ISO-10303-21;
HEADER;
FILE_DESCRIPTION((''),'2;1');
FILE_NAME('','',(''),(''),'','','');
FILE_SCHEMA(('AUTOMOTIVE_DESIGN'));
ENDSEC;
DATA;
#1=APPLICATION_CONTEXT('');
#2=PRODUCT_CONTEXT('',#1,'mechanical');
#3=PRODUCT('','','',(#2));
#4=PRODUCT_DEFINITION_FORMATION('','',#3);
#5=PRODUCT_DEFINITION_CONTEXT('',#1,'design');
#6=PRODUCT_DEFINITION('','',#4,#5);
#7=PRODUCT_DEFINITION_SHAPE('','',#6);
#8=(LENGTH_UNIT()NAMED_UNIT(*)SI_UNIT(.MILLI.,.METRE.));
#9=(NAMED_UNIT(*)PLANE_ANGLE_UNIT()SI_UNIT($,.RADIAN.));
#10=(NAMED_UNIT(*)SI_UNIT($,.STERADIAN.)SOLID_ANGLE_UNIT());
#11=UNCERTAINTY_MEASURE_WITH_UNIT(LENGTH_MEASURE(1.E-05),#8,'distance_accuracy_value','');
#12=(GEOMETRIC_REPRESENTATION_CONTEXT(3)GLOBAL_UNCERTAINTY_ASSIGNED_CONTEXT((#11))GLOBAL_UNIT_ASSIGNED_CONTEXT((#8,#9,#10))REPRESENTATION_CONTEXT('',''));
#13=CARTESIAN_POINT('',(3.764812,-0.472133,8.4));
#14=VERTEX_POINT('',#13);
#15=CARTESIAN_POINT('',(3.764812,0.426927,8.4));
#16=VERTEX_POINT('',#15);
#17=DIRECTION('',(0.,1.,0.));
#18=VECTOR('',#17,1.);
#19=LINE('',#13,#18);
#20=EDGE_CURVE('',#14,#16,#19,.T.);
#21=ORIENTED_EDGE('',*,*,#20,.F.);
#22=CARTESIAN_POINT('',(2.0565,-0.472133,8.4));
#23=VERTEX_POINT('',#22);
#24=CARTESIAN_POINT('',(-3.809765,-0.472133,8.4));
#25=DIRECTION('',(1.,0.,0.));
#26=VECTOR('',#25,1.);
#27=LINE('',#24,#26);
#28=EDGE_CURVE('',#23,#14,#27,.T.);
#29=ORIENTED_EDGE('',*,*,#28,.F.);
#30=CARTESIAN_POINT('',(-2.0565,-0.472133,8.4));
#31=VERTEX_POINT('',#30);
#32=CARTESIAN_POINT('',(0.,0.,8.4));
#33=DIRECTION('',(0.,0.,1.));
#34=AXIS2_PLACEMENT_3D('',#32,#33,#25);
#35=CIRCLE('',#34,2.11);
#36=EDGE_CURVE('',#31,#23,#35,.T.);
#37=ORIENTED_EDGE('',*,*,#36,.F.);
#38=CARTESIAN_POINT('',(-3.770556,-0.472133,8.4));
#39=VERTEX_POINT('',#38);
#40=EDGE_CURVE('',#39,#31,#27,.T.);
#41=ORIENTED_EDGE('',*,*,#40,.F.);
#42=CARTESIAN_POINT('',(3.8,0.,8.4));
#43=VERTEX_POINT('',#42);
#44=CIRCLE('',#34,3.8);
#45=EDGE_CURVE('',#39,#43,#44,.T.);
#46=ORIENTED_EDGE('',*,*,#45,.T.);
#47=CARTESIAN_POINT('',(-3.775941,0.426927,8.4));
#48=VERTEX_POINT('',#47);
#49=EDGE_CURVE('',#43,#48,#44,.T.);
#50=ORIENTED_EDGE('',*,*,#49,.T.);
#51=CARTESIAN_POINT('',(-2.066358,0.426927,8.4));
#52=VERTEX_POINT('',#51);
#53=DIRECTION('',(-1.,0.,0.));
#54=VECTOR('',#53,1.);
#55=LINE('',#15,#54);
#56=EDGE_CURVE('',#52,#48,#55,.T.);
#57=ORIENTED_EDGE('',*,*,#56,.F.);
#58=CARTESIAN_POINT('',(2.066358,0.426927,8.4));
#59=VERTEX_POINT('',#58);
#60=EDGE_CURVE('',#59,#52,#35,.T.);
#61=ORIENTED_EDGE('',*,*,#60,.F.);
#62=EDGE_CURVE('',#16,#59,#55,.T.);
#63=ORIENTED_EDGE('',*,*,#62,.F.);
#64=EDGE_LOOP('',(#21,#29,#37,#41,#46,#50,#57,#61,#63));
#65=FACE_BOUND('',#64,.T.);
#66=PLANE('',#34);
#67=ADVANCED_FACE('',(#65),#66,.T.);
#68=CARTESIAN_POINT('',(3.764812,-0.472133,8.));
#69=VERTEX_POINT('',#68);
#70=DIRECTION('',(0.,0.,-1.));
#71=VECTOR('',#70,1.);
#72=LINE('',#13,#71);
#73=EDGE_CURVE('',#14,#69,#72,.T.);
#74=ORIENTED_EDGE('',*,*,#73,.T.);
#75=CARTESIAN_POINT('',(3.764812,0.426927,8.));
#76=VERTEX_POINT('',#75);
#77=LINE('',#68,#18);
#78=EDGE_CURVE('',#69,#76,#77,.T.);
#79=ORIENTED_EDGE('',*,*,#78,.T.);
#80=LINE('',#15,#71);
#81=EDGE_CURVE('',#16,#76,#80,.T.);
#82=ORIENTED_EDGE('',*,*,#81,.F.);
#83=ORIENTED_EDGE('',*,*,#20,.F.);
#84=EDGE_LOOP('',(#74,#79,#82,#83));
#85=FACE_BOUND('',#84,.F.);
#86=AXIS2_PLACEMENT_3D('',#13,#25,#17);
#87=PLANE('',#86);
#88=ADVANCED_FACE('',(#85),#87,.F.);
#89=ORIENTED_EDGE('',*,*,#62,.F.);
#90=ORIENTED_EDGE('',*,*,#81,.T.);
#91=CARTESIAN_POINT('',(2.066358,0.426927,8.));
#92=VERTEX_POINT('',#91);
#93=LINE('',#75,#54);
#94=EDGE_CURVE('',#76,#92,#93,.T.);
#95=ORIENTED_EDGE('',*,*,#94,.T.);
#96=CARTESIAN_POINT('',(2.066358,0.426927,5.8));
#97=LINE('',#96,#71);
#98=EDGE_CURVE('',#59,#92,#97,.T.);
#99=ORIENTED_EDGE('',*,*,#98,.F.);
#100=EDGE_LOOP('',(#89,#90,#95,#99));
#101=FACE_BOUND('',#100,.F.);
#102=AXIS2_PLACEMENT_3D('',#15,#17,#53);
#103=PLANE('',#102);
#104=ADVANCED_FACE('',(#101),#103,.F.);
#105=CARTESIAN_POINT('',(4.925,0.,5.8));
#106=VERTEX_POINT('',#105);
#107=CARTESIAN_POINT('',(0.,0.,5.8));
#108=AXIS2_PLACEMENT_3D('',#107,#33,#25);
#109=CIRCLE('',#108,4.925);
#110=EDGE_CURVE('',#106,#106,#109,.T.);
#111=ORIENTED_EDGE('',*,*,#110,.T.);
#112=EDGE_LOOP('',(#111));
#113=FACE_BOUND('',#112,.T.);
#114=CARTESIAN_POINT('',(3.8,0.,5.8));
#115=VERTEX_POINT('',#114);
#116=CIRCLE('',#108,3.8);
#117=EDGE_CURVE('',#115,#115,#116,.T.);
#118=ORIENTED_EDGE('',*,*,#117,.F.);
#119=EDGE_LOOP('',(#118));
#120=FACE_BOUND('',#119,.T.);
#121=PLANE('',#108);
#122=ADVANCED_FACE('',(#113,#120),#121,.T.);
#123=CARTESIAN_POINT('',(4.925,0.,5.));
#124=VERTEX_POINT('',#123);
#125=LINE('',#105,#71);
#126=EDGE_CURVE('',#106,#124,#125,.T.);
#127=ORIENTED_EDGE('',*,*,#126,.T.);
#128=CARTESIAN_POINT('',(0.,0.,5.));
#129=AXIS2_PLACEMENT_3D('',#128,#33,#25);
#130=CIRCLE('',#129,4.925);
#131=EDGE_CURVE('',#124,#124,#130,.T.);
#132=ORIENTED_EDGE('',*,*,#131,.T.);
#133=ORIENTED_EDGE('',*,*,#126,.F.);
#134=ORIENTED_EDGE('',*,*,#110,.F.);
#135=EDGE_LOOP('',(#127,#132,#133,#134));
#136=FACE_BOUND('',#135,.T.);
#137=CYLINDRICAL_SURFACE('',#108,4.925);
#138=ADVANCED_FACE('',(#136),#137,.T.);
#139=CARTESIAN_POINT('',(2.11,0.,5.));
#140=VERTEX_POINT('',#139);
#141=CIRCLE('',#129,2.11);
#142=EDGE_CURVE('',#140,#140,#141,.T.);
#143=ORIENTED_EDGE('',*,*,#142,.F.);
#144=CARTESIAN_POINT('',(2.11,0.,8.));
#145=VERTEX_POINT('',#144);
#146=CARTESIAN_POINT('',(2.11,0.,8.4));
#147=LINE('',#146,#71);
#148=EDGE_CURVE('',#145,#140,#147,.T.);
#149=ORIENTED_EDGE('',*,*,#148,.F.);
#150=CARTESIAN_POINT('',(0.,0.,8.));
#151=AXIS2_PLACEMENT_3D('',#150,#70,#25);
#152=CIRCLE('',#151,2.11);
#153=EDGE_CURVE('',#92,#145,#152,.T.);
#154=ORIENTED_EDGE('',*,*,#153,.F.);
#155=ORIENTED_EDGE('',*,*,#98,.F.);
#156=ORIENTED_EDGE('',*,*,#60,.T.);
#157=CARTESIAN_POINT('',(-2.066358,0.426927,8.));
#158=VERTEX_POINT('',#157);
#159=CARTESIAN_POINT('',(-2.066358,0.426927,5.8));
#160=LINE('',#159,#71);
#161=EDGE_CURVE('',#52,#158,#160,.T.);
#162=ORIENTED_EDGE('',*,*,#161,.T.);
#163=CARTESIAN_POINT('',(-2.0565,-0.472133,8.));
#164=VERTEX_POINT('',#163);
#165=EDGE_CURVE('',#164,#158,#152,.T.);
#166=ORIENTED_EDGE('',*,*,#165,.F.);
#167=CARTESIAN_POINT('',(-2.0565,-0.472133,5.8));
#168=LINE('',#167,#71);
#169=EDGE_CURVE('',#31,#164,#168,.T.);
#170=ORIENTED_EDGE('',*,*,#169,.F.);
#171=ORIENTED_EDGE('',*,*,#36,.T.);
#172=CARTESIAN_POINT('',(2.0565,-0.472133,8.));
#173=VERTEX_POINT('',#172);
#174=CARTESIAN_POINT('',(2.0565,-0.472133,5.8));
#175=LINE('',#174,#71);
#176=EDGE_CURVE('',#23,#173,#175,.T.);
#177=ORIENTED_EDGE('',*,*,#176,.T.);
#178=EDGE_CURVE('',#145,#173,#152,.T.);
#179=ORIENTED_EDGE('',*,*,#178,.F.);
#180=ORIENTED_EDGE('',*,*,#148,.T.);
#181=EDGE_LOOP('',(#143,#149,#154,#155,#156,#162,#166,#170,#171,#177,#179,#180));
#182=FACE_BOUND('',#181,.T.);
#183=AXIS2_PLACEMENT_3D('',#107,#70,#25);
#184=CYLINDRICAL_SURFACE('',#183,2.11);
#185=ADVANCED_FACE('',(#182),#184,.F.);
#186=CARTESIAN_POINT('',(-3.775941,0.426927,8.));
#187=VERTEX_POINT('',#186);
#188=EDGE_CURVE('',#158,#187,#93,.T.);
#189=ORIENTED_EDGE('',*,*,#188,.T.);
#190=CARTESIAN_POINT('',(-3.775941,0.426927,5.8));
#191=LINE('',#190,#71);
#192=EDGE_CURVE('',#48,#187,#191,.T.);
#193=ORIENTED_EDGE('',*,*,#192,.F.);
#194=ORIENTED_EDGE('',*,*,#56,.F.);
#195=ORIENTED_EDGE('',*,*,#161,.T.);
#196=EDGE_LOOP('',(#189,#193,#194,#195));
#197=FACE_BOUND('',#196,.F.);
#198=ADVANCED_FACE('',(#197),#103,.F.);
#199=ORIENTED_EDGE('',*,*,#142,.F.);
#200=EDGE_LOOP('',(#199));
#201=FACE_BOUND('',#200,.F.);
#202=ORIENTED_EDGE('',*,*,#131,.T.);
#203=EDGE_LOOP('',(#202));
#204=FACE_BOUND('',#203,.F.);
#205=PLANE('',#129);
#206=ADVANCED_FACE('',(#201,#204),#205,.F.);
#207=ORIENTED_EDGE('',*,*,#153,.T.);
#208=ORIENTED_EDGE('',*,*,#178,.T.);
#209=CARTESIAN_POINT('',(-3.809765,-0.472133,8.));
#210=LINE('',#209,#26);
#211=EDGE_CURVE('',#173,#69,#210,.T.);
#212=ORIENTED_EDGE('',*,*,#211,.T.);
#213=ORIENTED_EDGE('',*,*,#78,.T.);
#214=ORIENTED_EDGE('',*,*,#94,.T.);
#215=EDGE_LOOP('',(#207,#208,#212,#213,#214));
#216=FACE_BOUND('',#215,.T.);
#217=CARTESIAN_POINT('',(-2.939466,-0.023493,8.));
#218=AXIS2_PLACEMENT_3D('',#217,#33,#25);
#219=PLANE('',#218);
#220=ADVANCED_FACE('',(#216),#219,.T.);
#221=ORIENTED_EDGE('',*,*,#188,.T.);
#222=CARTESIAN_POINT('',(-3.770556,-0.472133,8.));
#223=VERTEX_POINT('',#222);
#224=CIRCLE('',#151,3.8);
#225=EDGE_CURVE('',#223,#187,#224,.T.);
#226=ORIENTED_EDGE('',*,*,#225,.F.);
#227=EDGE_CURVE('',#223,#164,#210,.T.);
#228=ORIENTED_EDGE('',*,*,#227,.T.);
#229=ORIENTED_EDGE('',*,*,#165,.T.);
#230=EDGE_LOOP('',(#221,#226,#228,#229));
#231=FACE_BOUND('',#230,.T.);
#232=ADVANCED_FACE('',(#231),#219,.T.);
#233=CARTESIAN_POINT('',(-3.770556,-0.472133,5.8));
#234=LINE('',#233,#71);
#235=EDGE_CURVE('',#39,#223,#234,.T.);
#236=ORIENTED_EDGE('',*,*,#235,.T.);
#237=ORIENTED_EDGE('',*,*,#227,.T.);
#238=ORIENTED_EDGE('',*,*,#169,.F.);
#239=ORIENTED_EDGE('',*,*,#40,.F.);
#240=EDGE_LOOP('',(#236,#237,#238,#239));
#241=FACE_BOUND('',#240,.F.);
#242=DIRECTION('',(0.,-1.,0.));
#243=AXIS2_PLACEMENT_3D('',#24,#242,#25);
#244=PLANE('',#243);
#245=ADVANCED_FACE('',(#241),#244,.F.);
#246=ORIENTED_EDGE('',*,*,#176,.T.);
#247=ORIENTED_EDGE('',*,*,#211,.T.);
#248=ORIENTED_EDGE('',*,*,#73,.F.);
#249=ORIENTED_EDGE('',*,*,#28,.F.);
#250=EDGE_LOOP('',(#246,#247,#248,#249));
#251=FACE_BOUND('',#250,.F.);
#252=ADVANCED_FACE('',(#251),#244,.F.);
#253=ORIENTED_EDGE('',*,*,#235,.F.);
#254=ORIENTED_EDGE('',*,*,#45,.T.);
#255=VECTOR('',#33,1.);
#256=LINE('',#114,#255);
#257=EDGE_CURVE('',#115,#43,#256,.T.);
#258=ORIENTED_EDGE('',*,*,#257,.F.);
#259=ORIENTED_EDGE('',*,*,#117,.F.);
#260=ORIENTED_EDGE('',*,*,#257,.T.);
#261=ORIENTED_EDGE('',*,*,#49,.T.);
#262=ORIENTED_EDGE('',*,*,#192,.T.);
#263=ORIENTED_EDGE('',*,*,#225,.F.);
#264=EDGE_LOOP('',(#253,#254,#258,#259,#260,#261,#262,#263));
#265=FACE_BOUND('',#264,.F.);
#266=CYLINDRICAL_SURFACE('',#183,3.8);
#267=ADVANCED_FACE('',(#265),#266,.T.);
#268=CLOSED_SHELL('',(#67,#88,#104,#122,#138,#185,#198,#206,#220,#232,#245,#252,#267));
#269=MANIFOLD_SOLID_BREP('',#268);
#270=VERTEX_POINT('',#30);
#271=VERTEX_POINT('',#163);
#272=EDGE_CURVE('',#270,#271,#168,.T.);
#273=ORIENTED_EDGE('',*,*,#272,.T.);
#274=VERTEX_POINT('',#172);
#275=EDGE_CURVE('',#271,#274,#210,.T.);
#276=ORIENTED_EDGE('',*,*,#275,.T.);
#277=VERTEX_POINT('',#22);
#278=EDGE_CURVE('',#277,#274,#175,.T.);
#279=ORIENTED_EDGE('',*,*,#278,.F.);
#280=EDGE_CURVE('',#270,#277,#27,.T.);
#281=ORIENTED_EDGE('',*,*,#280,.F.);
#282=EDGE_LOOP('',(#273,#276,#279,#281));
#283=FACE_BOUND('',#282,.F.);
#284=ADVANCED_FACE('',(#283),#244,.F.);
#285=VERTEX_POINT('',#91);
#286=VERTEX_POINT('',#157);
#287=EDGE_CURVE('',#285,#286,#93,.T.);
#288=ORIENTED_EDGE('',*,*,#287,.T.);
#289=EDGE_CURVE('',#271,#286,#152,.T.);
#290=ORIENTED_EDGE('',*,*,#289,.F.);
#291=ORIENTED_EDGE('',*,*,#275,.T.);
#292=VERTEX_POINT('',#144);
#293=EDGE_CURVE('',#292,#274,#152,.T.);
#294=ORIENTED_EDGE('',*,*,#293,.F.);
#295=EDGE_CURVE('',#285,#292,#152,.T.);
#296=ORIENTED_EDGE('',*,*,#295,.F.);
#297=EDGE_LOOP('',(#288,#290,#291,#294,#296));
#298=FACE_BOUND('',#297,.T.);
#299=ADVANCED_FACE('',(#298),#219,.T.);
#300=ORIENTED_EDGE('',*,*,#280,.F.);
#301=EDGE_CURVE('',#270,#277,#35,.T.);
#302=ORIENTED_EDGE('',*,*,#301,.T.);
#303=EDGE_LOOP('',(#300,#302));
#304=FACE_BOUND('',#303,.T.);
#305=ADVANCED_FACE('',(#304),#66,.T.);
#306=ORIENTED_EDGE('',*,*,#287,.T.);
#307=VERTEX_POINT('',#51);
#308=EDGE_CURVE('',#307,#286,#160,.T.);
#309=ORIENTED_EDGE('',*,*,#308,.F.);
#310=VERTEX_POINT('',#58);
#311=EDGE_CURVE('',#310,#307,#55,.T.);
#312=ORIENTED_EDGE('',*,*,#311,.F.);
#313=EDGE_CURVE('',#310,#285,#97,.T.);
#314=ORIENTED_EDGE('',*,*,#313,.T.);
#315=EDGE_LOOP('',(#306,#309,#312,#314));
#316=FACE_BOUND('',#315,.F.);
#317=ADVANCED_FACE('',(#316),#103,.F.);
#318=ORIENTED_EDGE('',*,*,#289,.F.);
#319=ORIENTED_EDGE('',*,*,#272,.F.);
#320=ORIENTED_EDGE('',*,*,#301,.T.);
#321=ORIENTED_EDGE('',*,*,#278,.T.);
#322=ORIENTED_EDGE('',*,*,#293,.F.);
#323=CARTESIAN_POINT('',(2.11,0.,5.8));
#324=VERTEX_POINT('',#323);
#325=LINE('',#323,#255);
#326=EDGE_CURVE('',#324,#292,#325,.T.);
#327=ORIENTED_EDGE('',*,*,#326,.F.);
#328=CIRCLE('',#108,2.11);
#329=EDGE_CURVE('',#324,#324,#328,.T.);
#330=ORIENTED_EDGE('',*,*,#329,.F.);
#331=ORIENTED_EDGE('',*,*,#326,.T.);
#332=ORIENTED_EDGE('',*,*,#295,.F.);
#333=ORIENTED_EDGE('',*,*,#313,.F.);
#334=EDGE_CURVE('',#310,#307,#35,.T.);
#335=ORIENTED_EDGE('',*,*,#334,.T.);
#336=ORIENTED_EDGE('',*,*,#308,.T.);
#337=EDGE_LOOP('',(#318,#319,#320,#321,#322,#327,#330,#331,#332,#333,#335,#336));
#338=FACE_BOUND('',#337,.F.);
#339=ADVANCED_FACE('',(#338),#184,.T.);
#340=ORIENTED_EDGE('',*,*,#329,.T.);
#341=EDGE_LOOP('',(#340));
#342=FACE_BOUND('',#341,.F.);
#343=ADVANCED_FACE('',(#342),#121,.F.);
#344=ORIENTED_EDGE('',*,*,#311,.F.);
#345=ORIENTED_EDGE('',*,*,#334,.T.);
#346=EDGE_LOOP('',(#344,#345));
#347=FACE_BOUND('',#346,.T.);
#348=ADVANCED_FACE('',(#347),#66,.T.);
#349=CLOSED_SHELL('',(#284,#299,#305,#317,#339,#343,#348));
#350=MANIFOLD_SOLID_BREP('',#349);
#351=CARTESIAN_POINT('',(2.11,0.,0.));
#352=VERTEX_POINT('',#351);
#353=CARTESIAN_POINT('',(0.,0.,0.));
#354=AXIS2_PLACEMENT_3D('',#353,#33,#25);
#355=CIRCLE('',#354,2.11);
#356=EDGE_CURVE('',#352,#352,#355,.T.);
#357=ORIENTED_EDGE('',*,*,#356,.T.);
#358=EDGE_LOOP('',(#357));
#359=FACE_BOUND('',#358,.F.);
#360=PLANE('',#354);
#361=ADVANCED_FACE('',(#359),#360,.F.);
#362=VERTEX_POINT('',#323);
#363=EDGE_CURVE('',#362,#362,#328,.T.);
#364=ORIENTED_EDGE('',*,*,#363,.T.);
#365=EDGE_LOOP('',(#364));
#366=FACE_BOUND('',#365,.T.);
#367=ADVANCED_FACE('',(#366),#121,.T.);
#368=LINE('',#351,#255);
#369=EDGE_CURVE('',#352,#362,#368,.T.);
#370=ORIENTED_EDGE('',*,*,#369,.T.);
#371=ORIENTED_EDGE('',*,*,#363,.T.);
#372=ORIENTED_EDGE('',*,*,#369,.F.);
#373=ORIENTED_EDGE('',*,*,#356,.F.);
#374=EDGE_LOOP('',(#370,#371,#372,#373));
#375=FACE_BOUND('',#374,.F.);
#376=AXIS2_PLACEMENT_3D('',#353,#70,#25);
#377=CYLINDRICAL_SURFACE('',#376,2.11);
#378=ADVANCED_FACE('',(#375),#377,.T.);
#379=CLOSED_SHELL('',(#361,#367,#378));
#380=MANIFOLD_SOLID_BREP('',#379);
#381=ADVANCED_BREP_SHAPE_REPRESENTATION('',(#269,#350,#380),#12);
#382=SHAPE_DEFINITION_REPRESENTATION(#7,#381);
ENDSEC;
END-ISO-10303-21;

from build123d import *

# Parameters (mm, degrees)
F0_R     = 2.11
F1_DEPTH = 5.8
F2_R     = 4.925
F2_R_2   = 2.11
F3_DEPTH = 0.8
F4_R     = 3.8
F4_R_2   = 2.11
F5_DEPTH = 2.6
F6_R     = 2.11
F7_DEPTH = 2.6
F9_DEPTH = 0.4


with BuildPart() as f1:
    # F0 (on Top) → F1 (new body)
    with BuildSketch(Plane.XY):
        Circle(F0_R)
    extrude(amount=F1_DEPTH)


with BuildPart() as f3:
    # F2 (on face) → F3 (new body)
    with BuildSketch(Plane.XY.offset(5.8)):
        Circle(F2_R)
        Circle(F2_R_2, mode=Mode.SUBTRACT)
    extrude(amount=-F3_DEPTH)

    # F4 (on face) → F5 (join)
    with BuildSketch(Plane.XY.offset(5.8)):
        Circle(F4_R)
        Circle(F4_R_2, mode=Mode.SUBTRACT)
    extrude(amount=F5_DEPTH)


with BuildPart() as f7:
    # F6 (on face) → F7 (new body)
    with BuildSketch(Plane.XY.offset(5.8)):
        Circle(F6_R)
    extrude(amount=F7_DEPTH)


with BuildPart() as f9_tool:
    # F8 (on face) → F9 (new body)
    with BuildSketch(Plane.XY.offset(8.4)):
        with BuildLine():
            Line((-2.0663575468, 0.4269267956), (-3.8097645156, 0.4269267956))
            Line((-3.8097645156, 0.4269267956), (-3.8097645156, -0.4721327277))
            Line((-3.8097645156, -0.4721327277), (-2.0564996201, -0.4721327277))
            ThreePointArc((-2.0564996201, -0.4721327277), (-2.1098731742, -0.0231341469), (-2.0663575468, 0.4269267956))
        make_face()
        with BuildLine():
            Line((2.0663575468, 0.4269267956), (-2.0663575468, 0.4269267956))
            ThreePointArc((-2.0663575468, 0.4269267956), (-2.1098731742, -0.0231341469), (-2.0564996201, -0.4721327277))
            Line((-2.0564996201, -0.4721327277), (2.0564996201, -0.4721327277))
            ThreePointArc((2.0564996201, -0.4721327277), (2.0965822424, -0.2375771471), (2.11, 0))
            ThreePointArc((2.11, 0), (2.099061031, 0.2145758331), (2.0663575468, 0.4269267956))
        make_face()
        with BuildLine():
            Line((3.7648119032, 0.4269267956), (2.0663575468, 0.4269267956))
            ThreePointArc((2.0663575468, 0.4269267956), (2.099061031, 0.2145758331), (2.11, 0))
            ThreePointArc((2.11, 0), (2.0965822424, -0.2375771471), (2.0564996201, -0.4721327277))
            Line((2.0564996201, -0.4721327277), (3.7648119032, -0.4721327277))
            Line((3.7648119032, -0.4721327277), (3.7648119032, 0.4269267956))
        make_face()
    extrude(amount=-F9_DEPTH)


with BuildPart() as f3_1:
    add(f3.part)

    # F9: cut by f9_tool
    add(f9_tool.part, mode=Mode.SUBTRACT)


with BuildPart() as f7_1:
    add(f7.part)

    # F9: cut by f9_tool
    add(f9_tool.part, mode=Mode.SUBTRACT)


solid = Compound([f1.part, f3_1.part, f7_1.part])
